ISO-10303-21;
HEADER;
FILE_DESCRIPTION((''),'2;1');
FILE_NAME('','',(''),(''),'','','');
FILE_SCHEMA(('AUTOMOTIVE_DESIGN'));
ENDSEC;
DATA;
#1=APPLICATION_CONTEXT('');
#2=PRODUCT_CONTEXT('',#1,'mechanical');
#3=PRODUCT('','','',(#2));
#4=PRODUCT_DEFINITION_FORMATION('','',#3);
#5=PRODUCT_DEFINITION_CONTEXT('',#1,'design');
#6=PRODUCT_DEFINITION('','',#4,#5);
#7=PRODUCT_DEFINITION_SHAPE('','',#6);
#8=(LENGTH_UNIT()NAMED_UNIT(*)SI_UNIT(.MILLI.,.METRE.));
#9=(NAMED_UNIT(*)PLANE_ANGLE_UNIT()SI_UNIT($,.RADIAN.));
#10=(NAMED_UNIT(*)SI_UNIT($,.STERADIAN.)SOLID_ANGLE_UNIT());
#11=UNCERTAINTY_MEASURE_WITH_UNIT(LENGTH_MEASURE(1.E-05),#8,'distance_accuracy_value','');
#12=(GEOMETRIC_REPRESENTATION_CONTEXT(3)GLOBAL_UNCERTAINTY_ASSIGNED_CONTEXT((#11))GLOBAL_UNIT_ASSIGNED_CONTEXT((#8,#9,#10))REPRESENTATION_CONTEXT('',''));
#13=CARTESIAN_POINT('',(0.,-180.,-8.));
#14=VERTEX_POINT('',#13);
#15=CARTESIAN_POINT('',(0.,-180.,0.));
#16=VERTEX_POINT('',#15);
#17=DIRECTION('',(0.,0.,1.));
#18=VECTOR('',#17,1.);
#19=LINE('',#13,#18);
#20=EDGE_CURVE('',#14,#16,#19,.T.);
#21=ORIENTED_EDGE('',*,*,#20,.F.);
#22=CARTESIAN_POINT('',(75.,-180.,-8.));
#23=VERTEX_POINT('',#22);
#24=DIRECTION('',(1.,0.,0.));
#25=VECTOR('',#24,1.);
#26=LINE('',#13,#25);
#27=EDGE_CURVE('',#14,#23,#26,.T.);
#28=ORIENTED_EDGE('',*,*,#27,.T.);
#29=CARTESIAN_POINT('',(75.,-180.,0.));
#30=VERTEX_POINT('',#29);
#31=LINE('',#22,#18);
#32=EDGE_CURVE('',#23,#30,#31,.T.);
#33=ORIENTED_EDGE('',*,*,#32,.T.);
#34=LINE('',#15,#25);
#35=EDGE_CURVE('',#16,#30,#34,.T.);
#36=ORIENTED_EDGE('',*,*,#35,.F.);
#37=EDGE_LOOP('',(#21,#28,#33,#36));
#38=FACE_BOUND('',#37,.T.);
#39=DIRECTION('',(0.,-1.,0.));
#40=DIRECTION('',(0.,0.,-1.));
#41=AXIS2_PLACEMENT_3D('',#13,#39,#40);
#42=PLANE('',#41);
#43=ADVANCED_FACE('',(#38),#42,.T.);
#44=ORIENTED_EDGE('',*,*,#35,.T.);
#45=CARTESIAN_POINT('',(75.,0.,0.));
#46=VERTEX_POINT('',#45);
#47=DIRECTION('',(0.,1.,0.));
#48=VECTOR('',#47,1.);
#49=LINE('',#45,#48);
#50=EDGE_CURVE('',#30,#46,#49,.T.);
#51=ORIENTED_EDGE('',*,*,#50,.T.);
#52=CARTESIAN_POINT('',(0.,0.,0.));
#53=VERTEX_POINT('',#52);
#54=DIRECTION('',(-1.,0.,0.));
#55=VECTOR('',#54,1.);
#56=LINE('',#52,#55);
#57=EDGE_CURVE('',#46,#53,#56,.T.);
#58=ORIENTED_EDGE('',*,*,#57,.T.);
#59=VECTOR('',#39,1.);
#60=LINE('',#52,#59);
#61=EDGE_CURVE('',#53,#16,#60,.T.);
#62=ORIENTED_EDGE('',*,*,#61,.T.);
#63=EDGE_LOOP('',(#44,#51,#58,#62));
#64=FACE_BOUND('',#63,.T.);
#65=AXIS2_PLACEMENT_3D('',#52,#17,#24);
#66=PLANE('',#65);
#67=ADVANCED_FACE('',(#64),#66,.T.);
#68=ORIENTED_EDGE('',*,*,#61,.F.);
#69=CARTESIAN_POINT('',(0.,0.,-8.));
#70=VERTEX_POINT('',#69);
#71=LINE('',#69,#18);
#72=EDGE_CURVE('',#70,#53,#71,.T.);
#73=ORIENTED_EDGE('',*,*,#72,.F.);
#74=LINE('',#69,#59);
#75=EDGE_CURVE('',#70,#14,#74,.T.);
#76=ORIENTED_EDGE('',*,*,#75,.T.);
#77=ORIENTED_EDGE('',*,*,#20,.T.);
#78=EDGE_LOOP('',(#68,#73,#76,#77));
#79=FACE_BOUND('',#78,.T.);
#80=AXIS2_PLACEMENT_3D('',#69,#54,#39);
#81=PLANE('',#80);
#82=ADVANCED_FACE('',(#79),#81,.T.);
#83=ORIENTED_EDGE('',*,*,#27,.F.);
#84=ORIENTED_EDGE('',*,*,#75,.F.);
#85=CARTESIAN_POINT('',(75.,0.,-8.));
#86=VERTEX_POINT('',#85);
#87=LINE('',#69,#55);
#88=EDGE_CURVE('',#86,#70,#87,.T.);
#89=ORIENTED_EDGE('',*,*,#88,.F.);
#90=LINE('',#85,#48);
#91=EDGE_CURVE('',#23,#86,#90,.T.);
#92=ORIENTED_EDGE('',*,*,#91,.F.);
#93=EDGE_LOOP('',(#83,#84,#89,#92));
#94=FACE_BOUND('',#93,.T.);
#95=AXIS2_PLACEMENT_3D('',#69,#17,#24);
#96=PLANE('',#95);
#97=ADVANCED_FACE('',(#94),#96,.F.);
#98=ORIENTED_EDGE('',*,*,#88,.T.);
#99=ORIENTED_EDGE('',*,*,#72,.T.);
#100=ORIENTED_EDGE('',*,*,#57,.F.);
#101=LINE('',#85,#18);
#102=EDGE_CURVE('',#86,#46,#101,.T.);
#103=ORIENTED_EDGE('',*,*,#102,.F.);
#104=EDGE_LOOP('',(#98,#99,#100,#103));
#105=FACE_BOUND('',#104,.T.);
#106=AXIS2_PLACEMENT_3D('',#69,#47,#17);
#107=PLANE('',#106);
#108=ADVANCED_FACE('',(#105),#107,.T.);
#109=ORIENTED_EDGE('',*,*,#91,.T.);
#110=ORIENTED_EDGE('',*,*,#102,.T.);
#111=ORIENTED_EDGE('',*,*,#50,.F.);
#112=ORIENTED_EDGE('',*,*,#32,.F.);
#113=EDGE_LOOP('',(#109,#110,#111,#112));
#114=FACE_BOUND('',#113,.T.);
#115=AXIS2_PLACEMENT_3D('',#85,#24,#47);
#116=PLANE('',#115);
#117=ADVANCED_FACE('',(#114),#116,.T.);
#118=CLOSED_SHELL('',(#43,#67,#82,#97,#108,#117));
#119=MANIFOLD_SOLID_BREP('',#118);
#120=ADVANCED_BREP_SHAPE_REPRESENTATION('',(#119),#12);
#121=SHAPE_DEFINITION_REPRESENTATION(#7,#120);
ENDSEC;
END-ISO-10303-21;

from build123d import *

# Parameters (mm, degrees)
SKETCH_1_W             = 75
SKETCH_1_H             = 180
SM_BASE_FLANGE_1_DEPTH = 8


# Sheet-metal steps are written as plain solids
with BuildPart() as part:
    # Sketch 1 → Базовая кромка1 (new body)
    with BuildSketch(Plane.XY):
        with Locations((37.5, -90)):
            Rectangle(SKETCH_1_W, SKETCH_1_H)
    extrude(amount=-SM_BASE_FLANGE_1_DEPTH)


solid = part.part
